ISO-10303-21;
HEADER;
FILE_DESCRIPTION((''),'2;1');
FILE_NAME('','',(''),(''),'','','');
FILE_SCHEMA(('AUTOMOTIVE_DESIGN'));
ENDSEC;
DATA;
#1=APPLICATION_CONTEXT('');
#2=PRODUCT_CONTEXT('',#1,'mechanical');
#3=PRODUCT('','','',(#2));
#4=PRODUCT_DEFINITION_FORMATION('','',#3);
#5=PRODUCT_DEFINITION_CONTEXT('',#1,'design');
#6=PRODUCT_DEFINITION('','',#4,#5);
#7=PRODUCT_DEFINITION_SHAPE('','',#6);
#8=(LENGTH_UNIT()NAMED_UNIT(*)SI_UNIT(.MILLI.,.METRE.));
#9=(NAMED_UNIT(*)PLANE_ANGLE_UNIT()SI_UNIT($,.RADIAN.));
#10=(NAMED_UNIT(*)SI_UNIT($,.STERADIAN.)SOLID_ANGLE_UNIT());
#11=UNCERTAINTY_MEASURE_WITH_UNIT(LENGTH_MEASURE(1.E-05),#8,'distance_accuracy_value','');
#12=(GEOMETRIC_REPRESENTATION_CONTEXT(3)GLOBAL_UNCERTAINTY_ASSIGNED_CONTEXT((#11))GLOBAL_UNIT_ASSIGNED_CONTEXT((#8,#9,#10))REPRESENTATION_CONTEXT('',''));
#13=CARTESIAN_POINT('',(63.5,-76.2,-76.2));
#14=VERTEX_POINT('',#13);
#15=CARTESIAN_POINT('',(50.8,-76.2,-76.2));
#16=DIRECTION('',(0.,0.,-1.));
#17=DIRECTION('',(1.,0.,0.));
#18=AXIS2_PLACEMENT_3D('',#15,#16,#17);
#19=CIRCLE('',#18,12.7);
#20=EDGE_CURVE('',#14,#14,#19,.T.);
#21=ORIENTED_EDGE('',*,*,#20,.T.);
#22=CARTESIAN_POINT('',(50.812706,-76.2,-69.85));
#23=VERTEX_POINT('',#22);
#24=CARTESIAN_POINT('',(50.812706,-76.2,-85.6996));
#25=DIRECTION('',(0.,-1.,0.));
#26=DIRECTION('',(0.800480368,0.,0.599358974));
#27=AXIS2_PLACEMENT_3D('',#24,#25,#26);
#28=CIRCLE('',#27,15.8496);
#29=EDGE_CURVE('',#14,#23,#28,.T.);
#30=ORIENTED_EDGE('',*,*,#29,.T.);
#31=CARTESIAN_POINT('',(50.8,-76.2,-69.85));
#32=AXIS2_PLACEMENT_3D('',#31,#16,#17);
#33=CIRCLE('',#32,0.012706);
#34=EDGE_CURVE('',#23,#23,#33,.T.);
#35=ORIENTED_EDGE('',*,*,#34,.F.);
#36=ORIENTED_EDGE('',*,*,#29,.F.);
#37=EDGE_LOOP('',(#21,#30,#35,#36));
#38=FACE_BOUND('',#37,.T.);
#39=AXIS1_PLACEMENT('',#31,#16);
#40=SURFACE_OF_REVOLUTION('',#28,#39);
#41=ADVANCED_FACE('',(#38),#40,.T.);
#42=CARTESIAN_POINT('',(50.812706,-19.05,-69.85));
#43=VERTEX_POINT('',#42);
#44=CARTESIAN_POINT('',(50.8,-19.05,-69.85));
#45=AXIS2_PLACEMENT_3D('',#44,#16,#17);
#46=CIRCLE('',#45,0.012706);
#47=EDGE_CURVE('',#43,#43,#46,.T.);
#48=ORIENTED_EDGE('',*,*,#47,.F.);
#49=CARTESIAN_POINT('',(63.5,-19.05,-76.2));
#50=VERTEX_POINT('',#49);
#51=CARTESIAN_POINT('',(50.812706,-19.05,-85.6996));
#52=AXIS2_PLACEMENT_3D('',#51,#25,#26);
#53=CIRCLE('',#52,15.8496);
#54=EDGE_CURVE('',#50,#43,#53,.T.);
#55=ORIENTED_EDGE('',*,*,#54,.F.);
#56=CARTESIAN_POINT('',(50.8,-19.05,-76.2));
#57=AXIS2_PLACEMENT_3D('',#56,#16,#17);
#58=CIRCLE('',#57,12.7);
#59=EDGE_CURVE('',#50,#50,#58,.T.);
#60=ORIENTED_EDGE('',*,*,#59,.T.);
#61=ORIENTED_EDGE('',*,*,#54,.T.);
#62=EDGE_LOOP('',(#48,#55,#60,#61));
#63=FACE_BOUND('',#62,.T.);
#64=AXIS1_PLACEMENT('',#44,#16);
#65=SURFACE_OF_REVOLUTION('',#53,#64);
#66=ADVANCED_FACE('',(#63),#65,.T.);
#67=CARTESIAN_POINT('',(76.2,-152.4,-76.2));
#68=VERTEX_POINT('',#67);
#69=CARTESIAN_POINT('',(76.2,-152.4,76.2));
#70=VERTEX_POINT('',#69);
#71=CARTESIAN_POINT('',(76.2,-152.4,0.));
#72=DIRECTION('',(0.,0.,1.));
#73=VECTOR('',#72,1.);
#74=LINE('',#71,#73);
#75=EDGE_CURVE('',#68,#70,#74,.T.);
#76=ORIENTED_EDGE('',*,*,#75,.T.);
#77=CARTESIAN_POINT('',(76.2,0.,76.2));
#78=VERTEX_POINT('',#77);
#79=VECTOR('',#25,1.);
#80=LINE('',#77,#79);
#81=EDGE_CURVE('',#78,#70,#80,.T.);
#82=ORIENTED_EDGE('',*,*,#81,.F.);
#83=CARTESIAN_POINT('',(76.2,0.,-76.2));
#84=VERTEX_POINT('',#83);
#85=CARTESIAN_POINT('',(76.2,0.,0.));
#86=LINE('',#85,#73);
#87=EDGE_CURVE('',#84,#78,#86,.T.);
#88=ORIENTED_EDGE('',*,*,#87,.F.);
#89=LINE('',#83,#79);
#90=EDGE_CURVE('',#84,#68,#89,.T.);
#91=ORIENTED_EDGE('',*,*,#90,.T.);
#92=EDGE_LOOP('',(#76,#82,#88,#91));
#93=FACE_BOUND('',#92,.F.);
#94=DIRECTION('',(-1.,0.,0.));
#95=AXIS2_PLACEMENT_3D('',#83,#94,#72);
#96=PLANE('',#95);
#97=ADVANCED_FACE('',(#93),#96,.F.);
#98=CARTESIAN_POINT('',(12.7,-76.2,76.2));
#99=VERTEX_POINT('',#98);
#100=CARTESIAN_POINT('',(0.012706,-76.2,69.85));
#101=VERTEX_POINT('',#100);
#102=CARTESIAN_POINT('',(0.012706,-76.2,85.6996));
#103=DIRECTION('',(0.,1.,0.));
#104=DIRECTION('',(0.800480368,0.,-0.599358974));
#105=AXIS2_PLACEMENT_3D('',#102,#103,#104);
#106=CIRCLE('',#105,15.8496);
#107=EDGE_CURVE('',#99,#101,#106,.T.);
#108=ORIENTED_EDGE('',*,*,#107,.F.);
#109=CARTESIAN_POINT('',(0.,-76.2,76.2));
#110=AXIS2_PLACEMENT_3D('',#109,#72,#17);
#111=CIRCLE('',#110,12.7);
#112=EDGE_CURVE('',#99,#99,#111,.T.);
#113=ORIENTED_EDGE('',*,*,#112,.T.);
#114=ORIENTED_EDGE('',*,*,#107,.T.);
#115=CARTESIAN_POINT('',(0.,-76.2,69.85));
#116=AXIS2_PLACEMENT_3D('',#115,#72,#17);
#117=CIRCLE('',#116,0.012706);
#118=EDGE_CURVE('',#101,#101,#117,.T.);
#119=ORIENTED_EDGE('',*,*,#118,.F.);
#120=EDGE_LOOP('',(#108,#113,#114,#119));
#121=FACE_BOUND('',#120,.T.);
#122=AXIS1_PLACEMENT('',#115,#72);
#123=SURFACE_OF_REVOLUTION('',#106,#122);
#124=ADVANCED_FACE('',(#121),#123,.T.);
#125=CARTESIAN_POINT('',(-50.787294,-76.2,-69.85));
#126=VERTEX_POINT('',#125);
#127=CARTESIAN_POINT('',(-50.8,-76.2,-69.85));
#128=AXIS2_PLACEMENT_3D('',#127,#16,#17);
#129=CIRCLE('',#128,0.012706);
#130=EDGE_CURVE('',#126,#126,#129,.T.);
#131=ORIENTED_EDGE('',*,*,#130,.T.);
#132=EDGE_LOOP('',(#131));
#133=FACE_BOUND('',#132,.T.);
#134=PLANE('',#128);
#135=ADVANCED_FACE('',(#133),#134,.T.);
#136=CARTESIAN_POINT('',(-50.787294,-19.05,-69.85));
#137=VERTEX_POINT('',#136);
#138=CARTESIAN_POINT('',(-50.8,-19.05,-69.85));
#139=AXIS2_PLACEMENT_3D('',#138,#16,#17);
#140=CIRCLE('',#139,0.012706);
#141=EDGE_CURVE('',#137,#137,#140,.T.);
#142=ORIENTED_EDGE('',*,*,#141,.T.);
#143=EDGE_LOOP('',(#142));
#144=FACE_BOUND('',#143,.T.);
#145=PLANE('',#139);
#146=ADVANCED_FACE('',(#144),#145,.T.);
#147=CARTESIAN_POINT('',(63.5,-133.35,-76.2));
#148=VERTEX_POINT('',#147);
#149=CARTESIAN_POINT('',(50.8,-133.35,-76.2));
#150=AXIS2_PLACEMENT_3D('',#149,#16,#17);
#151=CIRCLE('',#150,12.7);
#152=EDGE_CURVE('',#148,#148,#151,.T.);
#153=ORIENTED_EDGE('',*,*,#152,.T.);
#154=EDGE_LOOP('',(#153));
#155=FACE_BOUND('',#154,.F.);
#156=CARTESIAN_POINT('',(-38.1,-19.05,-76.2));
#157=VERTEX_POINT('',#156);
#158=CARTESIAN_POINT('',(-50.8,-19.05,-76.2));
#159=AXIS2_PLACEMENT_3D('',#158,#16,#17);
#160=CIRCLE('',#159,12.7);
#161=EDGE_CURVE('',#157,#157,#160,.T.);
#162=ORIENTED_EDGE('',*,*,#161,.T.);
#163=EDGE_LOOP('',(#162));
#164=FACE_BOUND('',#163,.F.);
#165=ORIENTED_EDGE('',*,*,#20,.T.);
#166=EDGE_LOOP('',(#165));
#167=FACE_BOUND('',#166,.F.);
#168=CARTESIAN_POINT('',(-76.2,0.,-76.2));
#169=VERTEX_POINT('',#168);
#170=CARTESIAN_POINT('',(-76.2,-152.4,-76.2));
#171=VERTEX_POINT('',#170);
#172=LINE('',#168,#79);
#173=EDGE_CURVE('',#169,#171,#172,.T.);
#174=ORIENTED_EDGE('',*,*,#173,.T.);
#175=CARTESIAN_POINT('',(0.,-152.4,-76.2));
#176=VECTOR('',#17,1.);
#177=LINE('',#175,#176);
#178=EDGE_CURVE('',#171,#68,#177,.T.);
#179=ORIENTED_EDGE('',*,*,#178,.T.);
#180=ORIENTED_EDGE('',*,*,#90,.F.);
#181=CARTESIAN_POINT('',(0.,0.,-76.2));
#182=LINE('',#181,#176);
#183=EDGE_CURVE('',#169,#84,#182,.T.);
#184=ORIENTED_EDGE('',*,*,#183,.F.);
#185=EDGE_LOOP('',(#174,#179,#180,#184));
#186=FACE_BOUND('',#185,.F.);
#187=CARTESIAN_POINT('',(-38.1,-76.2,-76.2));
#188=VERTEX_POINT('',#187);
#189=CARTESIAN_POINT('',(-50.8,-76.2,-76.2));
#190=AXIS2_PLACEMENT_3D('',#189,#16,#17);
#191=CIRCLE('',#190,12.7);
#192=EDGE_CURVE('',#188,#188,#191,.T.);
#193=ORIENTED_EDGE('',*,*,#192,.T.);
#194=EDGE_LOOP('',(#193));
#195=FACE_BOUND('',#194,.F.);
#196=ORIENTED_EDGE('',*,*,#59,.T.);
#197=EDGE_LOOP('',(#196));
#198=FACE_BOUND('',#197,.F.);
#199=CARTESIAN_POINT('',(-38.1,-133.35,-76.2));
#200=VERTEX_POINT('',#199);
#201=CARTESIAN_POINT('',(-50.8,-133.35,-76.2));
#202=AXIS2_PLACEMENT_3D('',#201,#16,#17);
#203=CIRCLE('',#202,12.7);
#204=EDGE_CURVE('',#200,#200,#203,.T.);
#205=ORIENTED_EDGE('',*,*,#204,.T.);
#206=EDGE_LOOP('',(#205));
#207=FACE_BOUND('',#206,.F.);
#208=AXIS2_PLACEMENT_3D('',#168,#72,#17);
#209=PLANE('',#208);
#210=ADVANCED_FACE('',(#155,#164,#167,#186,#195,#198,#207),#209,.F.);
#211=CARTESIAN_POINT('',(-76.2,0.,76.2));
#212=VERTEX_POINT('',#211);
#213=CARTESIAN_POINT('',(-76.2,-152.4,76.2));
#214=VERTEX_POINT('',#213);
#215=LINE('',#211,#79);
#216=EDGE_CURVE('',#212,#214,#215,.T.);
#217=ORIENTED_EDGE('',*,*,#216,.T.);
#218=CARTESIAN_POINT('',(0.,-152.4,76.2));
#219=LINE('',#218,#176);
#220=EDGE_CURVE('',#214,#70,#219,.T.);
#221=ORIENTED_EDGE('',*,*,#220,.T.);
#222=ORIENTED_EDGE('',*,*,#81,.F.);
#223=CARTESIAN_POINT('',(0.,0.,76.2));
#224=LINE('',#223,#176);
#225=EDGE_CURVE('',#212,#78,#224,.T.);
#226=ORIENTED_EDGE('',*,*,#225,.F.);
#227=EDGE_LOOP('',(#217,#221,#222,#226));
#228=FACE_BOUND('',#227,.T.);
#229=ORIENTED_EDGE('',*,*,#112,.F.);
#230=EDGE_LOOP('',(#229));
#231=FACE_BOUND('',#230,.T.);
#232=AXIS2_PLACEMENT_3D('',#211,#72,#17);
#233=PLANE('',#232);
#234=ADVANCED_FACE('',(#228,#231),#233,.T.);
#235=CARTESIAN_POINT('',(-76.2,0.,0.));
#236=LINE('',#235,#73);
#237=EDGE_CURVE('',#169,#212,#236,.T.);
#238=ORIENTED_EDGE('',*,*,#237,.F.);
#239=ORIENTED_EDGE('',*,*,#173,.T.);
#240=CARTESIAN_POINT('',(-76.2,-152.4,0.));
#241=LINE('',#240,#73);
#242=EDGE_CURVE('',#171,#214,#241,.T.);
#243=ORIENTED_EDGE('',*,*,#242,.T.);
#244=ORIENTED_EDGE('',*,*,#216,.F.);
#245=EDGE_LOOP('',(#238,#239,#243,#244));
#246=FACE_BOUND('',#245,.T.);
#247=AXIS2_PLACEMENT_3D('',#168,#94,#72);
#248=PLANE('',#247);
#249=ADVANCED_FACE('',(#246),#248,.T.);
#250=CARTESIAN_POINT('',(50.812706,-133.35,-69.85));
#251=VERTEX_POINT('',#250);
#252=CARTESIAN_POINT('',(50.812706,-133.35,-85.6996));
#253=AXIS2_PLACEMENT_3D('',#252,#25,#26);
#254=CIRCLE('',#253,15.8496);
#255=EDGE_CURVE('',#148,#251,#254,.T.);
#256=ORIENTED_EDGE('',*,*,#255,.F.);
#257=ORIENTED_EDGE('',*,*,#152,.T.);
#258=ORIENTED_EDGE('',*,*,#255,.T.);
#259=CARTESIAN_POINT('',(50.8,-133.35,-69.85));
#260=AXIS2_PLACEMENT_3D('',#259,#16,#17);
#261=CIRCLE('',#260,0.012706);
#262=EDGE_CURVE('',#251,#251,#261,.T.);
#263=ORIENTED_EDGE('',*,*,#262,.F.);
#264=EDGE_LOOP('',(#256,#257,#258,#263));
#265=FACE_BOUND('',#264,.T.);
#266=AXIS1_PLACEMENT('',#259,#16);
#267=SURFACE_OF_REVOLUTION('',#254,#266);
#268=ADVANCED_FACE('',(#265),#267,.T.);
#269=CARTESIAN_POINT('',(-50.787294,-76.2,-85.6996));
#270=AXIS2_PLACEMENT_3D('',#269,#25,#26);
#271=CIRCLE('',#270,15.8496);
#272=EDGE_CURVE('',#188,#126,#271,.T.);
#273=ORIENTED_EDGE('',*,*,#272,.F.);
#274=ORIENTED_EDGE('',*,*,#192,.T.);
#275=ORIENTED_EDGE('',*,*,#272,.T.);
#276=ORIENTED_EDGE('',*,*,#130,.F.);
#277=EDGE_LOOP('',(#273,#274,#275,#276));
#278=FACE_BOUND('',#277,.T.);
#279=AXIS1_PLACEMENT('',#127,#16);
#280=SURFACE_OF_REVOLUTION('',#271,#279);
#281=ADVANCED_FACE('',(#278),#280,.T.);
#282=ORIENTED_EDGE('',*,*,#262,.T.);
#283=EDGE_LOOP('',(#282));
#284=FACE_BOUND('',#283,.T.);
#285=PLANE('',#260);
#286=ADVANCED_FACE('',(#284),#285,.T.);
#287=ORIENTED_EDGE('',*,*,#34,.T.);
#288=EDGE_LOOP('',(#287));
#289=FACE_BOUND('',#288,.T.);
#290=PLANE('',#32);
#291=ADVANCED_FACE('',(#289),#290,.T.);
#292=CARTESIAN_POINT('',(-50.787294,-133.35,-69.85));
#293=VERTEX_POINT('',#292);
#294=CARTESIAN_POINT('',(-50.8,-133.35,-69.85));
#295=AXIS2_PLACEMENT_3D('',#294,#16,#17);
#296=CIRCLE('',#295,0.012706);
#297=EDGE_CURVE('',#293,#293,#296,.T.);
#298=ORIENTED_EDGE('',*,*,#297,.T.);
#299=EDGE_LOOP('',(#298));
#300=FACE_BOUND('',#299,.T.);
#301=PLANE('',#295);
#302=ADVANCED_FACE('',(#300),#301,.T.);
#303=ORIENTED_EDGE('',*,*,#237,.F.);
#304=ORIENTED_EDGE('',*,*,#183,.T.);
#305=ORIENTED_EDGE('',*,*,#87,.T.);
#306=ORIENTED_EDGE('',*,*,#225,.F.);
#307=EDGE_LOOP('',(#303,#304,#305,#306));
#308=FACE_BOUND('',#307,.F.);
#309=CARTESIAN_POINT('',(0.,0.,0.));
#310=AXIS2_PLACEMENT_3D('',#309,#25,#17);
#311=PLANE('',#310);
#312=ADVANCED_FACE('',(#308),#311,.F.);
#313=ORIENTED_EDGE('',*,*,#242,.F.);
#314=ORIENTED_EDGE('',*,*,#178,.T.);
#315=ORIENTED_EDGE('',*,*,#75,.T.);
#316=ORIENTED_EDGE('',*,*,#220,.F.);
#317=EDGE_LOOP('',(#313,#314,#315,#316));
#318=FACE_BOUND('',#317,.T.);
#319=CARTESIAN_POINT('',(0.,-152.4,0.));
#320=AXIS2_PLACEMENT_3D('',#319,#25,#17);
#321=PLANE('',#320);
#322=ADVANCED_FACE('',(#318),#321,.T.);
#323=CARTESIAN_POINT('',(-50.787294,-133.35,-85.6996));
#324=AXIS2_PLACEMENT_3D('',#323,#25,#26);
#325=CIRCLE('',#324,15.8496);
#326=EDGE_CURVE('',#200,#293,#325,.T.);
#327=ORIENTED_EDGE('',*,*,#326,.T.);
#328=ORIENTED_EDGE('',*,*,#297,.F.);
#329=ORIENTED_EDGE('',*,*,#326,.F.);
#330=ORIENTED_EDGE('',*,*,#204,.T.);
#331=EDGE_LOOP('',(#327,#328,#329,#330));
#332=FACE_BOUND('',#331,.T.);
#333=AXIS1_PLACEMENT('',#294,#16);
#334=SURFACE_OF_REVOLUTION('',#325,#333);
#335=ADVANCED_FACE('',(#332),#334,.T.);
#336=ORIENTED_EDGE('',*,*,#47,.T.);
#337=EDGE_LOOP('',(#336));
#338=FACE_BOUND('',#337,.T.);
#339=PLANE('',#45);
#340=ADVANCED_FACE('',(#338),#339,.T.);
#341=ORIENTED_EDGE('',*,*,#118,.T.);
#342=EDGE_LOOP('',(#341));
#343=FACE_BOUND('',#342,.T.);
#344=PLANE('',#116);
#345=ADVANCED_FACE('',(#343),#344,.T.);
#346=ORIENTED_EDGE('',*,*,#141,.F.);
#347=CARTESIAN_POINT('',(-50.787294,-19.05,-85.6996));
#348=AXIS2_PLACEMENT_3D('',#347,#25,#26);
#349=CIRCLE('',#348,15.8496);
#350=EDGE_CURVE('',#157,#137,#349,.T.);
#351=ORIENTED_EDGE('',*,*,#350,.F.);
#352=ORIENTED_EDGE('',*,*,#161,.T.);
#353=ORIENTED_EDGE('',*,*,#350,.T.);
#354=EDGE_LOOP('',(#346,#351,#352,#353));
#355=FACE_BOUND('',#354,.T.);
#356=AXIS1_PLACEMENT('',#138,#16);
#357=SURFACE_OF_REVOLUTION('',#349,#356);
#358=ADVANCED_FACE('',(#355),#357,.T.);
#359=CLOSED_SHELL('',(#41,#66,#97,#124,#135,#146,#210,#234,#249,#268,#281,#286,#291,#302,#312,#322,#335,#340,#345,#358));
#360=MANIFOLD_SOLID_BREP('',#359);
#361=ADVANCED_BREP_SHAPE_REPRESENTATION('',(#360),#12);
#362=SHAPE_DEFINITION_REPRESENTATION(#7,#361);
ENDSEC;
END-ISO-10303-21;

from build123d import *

# Parameters (mm, degrees)
F0_W     = 152.4
F0_H     = 152.4
F1_DEPTH = 152.4
F2_R     = 12.7
F3_DEPTH = 6.35
F5_R     = 12.7
F6_DEPTH = 6.35
F8_R     = 12.7
F9_DEPTH = 6.35


# Not quite as in the source:
# - a fillet or chamfer that OpenCascade refuses, or shapes differently, is made with other operations: its cross-section is extruded or revolved along the edge and cut away or added


with BuildPart() as f1:
    # F0 (on Front) → F1 (new body)
    with BuildSketch(Plane.XZ):
        Rectangle(F0_W, F0_H)
    extrude(amount=F1_DEPTH)

    # F2 (on face) → F3 (cut)
    with BuildSketch(Plane.XY.offset(76.2)):
        with Locations((0, -76.2)):
            Circle(F2_R)
    extrude(amount=-F3_DEPTH, mode=Mode.SUBTRACT)

    # F4: fillet of radius 15.8496 on 1 edges, made by hand

    # F4_s1 → F4_t2 (revolve)
    with BuildSketch(Plane.XZ.offset(76.2)):
        with BuildLine():
            ThreePointArc((12.7, 76.2), (7.1065402986, 71.5261268844), (0.0127063564, 69.85))
            Line((0.0127063564, 69.85), (12.7, 69.85))
            Line((12.7, 69.85), (12.7, 76.2))
        make_face()
    revolve(axis=Axis((0, -76.2, 69.85), (0, 0, 1)))

    # F5 (on face) → F6 (cut)
    with BuildSketch(Plane(origin=(0, 0, -76.2), x_dir=(1, 0, 0), z_dir=(0, 0, -1))):
        with Locations((50.8, 19.05)):
            Circle(F5_R)
        with Locations((50.8, 76.2)):
            Circle(F5_R)
        with Locations((-50.8, 19.05)):
            Circle(F5_R)
        with Locations((-50.8, 76.2)):
            Circle(F5_R)
        with Locations((-50.8, 133.35)):
            Circle(F5_R)
        with Locations((50.8, 133.35)):
            Circle(F5_R)
    extrude(amount=-F6_DEPTH, mode=Mode.SUBTRACT)

    # F7: fillet of radius 15.8496 on 6 edges, made by hand

    # F7_s1 → F7_t2 (revolve)
    with BuildSketch(Plane.XZ.offset(19.05)):
        with BuildLine():
            ThreePointArc((63.5, -76.2), (57.9065402986, -71.5261268844), (50.8127063564, -69.85))
            Line((50.8127063564, -69.85), (63.5, -69.85))
            Line((63.5, -69.85), (63.5, -76.2))
        make_face()
    revolve(axis=Axis((50.8, -19.05, -69.85), (0, 0, -1)))

    # F7_s3 → F7_t4 (revolve)
    with BuildSketch(Plane.XZ.offset(76.2)):
        with BuildLine():
            ThreePointArc((63.5, -76.2), (57.9065402986, -71.5261268844), (50.8127063564, -69.85))
            Line((50.8127063564, -69.85), (63.5, -69.85))
            Line((63.5, -69.85), (63.5, -76.2))
        make_face()
    revolve(axis=Axis((50.8, -76.2, -69.85), (0, 0, -1)))

    # F7_s5 → F7_t6 (revolve)
    with BuildSketch(Plane.XZ.offset(133.35)):
        with BuildLine():
            ThreePointArc((63.5, -76.2), (57.9065402986, -71.5261268844), (50.8127063564, -69.85))
            Line((50.8127063564, -69.85), (63.5, -69.85))
            Line((63.5, -69.85), (63.5, -76.2))
        make_face()
    revolve(axis=Axis((50.8, -133.35, -69.85), (0, 0, -1)))

    # F7_s7 → F7_t8 (revolve)
    with BuildSketch(Plane.XZ.offset(19.05)):
        with BuildLine():
            ThreePointArc((-38.1, -76.2), (-43.6934597014, -71.5261268844), (-50.7872936436, -69.85))
            Line((-50.7872936436, -69.85), (-38.1, -69.85))
            Line((-38.1, -69.85), (-38.1, -76.2))
        make_face()
    revolve(axis=Axis((-50.8, -19.05, -69.85), (0, 0, -1)))

    # F7_s9 → F7_t10 (revolve)
    with BuildSketch(Plane.XZ.offset(76.2)):
        with BuildLine():
            ThreePointArc((-38.1, -76.2), (-43.6934597014, -71.5261268844), (-50.7872936436, -69.85))
            Line((-50.7872936436, -69.85), (-38.1, -69.85))
            Line((-38.1, -69.85), (-38.1, -76.2))
        make_face()
    revolve(axis=Axis((-50.8, -76.2, -69.85), (0, 0, -1)))

    # F7_s11 → F7_t12 (revolve)
    with BuildSketch(Plane.XZ.offset(133.35)):
        with BuildLine():
            ThreePointArc((-38.1, -76.2), (-43.6934597014, -71.5261268844), (-50.7872936436, -69.85))
            Line((-50.7872936436, -69.85), (-38.1, -69.85))
            Line((-38.1, -69.85), (-38.1, -76.2))
        make_face()
    revolve(axis=Axis((-50.8, -133.35, -69.85), (0, 0, -1)))

    # F8 (on face) → F9 (join)
    with BuildSketch(Plane(origin=(0, 0, 0), x_dir=(-1, 0, 0), z_dir=(0, 1, 0))):
        with Locations((50.8, -57.15)):
            Circle(F8_R)
        with Locations((-50.8, -57.15)):
            Circle(F8_R)
        with Locations((-50.8, 57.15)):
            Circle(F8_R)
        with Locations((50.8, 57.15)):
            Circle(F8_R)
    extrude(amount=-F9_DEPTH)


solid = f1.part
